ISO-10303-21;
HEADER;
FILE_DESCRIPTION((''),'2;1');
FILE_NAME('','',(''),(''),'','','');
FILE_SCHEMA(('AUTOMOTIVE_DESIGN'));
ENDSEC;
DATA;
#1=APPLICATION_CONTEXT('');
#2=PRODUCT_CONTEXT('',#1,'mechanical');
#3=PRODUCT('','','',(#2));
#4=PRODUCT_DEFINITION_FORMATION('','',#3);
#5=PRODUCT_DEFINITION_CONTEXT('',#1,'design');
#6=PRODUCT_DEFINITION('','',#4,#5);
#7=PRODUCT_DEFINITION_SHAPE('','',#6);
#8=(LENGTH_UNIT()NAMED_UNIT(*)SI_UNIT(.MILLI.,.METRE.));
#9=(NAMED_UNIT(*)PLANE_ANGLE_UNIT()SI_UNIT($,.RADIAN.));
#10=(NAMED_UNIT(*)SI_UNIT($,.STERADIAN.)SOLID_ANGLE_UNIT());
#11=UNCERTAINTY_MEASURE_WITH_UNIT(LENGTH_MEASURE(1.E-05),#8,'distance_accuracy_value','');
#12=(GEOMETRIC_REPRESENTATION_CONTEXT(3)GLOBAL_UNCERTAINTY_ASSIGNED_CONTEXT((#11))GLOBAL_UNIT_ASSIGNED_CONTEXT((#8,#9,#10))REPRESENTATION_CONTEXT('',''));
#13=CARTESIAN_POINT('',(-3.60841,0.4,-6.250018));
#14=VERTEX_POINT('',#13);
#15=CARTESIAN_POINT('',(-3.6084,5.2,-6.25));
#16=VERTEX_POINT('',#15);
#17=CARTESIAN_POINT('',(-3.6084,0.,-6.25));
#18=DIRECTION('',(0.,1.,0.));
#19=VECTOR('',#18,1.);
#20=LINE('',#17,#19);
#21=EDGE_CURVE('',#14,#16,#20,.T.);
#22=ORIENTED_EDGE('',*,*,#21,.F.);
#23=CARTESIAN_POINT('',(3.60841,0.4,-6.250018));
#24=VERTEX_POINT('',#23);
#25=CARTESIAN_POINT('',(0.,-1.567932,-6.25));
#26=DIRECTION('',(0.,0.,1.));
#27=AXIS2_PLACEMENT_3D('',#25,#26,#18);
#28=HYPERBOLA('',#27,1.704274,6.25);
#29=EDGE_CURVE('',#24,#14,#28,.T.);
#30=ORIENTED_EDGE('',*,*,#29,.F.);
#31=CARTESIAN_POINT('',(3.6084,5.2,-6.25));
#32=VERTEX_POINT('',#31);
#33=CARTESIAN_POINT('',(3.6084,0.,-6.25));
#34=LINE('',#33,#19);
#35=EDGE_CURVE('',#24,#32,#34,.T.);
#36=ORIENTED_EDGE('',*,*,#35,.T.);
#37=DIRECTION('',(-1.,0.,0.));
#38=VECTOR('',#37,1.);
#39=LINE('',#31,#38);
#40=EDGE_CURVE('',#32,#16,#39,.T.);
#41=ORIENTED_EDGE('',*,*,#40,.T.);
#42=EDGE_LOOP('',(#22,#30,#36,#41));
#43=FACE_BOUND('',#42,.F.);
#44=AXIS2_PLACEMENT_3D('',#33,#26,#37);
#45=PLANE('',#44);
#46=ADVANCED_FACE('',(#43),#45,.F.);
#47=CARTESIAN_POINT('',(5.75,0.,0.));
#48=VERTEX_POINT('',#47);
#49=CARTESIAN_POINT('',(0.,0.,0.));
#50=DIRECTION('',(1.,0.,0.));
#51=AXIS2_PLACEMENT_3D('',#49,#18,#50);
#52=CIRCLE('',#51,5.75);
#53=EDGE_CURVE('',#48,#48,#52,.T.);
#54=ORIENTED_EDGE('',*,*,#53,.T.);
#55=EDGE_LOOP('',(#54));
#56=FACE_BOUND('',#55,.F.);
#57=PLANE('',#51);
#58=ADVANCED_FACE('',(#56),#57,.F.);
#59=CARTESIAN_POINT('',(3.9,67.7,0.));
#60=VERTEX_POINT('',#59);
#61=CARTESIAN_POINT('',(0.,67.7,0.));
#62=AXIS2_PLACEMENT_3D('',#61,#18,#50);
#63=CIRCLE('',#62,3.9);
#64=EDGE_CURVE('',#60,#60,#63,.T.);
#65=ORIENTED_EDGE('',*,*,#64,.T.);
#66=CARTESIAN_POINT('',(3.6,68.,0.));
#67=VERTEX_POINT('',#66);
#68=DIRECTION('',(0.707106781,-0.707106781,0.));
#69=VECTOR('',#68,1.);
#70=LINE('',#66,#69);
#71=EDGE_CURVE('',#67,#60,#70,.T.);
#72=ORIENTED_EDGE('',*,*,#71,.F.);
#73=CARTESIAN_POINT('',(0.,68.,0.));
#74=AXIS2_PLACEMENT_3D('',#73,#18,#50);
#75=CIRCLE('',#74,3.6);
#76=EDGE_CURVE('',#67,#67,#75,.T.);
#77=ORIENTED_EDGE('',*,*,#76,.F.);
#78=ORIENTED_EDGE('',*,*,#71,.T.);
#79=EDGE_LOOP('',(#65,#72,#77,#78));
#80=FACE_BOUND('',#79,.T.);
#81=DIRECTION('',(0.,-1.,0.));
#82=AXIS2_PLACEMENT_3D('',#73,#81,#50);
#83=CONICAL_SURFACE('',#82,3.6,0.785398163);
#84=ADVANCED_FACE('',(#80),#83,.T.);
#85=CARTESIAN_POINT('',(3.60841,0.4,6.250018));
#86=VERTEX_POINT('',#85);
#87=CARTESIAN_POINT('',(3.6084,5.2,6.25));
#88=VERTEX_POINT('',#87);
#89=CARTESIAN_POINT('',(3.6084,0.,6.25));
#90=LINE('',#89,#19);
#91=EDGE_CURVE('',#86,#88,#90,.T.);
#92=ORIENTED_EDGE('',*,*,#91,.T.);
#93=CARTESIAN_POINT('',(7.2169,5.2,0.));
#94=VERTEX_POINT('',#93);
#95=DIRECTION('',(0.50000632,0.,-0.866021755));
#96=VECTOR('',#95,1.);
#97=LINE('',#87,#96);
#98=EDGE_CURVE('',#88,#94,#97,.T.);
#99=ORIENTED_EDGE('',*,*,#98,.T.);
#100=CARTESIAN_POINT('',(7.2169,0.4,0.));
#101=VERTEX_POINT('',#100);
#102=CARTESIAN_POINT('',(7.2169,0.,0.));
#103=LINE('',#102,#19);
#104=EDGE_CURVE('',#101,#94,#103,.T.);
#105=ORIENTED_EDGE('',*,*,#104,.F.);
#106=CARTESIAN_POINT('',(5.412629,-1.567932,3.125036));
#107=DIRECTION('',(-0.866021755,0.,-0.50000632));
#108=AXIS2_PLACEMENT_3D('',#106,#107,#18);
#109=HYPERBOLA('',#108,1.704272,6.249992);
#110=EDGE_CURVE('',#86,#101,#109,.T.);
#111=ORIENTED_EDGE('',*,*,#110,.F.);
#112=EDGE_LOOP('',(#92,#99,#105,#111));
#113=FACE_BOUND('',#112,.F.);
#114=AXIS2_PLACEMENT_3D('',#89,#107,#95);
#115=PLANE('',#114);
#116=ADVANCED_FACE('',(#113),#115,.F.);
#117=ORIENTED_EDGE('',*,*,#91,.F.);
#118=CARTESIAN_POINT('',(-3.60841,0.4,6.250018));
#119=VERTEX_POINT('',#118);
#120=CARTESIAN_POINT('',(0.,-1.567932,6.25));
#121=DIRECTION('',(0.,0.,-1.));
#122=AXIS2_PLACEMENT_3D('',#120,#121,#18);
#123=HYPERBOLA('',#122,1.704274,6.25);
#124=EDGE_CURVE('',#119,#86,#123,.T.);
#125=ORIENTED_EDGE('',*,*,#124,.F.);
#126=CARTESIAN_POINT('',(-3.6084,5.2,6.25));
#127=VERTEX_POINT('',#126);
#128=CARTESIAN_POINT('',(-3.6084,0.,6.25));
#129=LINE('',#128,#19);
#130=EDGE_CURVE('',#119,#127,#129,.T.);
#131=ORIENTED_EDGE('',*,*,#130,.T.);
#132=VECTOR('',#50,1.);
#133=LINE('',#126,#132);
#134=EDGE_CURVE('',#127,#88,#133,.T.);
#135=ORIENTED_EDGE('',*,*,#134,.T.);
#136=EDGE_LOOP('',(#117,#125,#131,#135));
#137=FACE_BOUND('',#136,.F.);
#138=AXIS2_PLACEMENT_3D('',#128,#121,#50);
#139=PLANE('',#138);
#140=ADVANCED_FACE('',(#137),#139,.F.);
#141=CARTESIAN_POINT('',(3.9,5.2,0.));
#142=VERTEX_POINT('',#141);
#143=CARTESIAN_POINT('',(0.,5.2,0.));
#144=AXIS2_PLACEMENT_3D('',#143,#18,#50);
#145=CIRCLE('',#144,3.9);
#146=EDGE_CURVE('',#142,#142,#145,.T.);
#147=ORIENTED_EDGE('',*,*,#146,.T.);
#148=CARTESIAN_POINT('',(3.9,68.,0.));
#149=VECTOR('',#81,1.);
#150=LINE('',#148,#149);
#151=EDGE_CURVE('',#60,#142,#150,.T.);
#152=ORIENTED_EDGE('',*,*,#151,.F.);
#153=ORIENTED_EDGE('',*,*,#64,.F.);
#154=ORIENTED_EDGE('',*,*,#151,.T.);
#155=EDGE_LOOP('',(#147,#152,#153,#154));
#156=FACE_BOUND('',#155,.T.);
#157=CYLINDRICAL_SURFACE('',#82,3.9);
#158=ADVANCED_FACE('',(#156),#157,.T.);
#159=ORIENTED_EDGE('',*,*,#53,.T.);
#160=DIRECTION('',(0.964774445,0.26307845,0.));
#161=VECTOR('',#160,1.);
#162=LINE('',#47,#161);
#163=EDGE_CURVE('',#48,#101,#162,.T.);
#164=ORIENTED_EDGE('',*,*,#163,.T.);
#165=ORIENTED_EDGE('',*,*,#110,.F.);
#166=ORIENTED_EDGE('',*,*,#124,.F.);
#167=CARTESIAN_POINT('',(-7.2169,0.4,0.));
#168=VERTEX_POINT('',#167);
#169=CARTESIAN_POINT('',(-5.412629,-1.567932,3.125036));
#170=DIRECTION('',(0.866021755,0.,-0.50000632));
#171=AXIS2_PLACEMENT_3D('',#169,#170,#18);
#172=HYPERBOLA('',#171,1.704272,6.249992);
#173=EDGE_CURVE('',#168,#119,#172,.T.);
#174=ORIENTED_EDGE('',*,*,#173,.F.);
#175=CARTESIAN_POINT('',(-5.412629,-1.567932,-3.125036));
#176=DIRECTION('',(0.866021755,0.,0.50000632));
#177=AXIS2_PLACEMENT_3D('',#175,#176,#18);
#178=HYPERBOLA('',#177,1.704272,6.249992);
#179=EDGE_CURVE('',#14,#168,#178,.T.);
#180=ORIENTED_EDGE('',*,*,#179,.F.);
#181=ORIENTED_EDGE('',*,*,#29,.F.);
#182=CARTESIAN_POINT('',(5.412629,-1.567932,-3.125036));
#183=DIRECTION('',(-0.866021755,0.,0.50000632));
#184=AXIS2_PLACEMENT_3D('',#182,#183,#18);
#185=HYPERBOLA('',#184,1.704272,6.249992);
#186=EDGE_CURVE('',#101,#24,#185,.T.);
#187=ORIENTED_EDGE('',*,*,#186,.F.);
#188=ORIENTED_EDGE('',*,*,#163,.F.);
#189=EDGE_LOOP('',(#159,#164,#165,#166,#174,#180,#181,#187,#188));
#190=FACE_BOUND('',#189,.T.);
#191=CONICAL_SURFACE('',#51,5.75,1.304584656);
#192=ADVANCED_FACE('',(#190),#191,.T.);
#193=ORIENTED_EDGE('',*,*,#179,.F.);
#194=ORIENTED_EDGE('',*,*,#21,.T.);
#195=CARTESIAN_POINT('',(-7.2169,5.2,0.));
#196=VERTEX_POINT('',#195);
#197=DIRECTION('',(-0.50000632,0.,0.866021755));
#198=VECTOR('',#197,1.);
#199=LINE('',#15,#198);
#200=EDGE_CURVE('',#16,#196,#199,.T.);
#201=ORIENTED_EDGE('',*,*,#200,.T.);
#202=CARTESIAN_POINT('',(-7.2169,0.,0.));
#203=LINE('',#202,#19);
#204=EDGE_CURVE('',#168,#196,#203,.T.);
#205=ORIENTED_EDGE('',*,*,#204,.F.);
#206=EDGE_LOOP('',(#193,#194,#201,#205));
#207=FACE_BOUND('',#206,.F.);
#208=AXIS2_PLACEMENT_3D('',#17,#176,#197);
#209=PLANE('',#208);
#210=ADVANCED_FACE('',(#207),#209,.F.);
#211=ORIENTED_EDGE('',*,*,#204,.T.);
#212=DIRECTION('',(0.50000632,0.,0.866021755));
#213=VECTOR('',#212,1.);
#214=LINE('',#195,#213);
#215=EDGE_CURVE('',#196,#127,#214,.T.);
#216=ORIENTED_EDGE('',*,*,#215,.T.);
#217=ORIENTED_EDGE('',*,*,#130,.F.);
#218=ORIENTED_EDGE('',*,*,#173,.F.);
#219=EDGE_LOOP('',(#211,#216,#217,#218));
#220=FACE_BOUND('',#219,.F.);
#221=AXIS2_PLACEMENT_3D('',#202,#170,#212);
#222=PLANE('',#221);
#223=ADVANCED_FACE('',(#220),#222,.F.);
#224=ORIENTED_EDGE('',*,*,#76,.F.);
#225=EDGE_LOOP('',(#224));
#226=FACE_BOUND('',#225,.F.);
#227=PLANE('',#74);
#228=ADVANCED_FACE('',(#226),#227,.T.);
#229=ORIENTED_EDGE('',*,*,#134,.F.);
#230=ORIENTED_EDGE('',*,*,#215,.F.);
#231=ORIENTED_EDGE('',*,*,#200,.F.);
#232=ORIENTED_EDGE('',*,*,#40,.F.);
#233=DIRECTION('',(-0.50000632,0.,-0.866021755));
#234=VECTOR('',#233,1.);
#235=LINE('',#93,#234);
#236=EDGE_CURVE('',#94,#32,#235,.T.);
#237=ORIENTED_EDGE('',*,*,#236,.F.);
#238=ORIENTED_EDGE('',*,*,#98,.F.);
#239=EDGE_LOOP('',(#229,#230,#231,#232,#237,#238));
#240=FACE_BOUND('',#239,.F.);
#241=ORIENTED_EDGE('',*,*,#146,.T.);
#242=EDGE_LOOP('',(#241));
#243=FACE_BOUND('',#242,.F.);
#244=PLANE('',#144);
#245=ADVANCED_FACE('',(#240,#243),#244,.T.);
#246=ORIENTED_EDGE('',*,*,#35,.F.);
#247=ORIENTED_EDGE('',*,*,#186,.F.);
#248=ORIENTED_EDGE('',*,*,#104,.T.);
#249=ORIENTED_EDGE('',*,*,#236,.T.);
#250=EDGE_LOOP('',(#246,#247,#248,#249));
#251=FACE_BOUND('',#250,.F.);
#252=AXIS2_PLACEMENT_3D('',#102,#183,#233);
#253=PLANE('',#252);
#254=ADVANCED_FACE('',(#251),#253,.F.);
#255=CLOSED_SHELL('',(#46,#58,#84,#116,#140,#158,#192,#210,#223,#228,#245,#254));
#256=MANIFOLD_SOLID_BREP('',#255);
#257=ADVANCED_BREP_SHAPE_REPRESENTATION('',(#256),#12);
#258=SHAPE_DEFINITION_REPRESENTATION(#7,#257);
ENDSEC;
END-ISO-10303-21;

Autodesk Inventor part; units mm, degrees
ref_plane "YZ Plane" through (0, 0, 0) normal (1, 0, 0) x (0, 1, 0)
ref_plane "XZ Plane" through (0, 0, 0) normal (0, 1, 0) x (-1, 0, 0)
ref_plane "XY Plane" through (0, 0, 0) normal (0, 0, 1) x (1, 0, 0)
sketch "Schizzo4" plane through (0, 0, 0) normal (0, 0, 1) x (1, 0, 0)
  line L0 (0, 0) -> (0, 68)
  line L1 (0, 68) -> (3.9, 68)
  line L2 (3.9, 68) -> (3.9, 5.2)
  line L3 (3.9, 5.2) -> (7.5, 5.2)
  line L4 (7.5, 5.2) -> (7.5, 0)
  line L5 (7.5, 0) -> (0, 0)
  dimension "d0" = 5.2
  dimension "d1" = 7.8
  dimension "d2" = 15
  dimension "d3" = 68
revolve "Rivoluzione1" add sketch "Schizzo4" angle 360 about axis through (0, 0, 0) along (0, 1, 0)
thread "Filettatura1" size "M8x1.25" class "6g" standard "ANSI Metric M Profile" length 62.5 offset 37
sketch "Schizzo5" plane through (0, 0, 0) normal (0, -1, 0) x (1, 0, 0)
  line L0 (-3.6084, -6.25) -> (-7.2169, 0)
  line L1 (-7.2169, 0) -> (-3.6084, 6.25)
  line L2 (-3.6084, 6.25) -> (3.6084, 6.25)
  line L3 (3.6084, 6.25) -> (7.2169, 0)
  line L4 (7.2169, 0) -> (3.6084, -6.25)
  line L5 (3.6084, -6.25) -> (-3.6084, -6.25)
  circle A0 centre (0, 0) radius 7.5 projected
  dimension "d9" = 12.5
extrude "Estrusione1" cut sketch "Schizzo5" against normal up to surface (5.2 mm away)
sketch "Schizzo6" plane through (0, 0, 0) normal (0, 0, 1) x (1, 0, 0)
  line L0 (3.9, 68) -> (-3.9, 68) projected
  line L1 (3.6, 68) -> (3.9, 67.7)
  line L2 (3.9, 5.2) -> (3.9, 68) projected
  line L3 (3.9, 68) -> (3.6, 68)
  line L4 (3.6084, 0) -> (7.2169, 0) projected
  line L5 (5.75, 0) -> (7.2169, 0.4)
  line L6 (7.2169, 0.4) -> (7.2169, 0)
  line L7 (7.2169, 0) -> (5.75, 0)
  line L8 (7.2169, 5.2) -> (3.6084, 5.2) projected
  line L9 (0, 0) -> (0, 68)
  dimension "d12" = 45
  dimension "d14" = 0.3
  dimension "d15" = 4.8
  dimension "d16" = 11.5
revolve "Rivoluzione3" cut sketch "Schizzo6" angle 360 about axis through (0, 0, 0) along (0, 1, 0)
properties part number "Bolt" material "Acciaio"
